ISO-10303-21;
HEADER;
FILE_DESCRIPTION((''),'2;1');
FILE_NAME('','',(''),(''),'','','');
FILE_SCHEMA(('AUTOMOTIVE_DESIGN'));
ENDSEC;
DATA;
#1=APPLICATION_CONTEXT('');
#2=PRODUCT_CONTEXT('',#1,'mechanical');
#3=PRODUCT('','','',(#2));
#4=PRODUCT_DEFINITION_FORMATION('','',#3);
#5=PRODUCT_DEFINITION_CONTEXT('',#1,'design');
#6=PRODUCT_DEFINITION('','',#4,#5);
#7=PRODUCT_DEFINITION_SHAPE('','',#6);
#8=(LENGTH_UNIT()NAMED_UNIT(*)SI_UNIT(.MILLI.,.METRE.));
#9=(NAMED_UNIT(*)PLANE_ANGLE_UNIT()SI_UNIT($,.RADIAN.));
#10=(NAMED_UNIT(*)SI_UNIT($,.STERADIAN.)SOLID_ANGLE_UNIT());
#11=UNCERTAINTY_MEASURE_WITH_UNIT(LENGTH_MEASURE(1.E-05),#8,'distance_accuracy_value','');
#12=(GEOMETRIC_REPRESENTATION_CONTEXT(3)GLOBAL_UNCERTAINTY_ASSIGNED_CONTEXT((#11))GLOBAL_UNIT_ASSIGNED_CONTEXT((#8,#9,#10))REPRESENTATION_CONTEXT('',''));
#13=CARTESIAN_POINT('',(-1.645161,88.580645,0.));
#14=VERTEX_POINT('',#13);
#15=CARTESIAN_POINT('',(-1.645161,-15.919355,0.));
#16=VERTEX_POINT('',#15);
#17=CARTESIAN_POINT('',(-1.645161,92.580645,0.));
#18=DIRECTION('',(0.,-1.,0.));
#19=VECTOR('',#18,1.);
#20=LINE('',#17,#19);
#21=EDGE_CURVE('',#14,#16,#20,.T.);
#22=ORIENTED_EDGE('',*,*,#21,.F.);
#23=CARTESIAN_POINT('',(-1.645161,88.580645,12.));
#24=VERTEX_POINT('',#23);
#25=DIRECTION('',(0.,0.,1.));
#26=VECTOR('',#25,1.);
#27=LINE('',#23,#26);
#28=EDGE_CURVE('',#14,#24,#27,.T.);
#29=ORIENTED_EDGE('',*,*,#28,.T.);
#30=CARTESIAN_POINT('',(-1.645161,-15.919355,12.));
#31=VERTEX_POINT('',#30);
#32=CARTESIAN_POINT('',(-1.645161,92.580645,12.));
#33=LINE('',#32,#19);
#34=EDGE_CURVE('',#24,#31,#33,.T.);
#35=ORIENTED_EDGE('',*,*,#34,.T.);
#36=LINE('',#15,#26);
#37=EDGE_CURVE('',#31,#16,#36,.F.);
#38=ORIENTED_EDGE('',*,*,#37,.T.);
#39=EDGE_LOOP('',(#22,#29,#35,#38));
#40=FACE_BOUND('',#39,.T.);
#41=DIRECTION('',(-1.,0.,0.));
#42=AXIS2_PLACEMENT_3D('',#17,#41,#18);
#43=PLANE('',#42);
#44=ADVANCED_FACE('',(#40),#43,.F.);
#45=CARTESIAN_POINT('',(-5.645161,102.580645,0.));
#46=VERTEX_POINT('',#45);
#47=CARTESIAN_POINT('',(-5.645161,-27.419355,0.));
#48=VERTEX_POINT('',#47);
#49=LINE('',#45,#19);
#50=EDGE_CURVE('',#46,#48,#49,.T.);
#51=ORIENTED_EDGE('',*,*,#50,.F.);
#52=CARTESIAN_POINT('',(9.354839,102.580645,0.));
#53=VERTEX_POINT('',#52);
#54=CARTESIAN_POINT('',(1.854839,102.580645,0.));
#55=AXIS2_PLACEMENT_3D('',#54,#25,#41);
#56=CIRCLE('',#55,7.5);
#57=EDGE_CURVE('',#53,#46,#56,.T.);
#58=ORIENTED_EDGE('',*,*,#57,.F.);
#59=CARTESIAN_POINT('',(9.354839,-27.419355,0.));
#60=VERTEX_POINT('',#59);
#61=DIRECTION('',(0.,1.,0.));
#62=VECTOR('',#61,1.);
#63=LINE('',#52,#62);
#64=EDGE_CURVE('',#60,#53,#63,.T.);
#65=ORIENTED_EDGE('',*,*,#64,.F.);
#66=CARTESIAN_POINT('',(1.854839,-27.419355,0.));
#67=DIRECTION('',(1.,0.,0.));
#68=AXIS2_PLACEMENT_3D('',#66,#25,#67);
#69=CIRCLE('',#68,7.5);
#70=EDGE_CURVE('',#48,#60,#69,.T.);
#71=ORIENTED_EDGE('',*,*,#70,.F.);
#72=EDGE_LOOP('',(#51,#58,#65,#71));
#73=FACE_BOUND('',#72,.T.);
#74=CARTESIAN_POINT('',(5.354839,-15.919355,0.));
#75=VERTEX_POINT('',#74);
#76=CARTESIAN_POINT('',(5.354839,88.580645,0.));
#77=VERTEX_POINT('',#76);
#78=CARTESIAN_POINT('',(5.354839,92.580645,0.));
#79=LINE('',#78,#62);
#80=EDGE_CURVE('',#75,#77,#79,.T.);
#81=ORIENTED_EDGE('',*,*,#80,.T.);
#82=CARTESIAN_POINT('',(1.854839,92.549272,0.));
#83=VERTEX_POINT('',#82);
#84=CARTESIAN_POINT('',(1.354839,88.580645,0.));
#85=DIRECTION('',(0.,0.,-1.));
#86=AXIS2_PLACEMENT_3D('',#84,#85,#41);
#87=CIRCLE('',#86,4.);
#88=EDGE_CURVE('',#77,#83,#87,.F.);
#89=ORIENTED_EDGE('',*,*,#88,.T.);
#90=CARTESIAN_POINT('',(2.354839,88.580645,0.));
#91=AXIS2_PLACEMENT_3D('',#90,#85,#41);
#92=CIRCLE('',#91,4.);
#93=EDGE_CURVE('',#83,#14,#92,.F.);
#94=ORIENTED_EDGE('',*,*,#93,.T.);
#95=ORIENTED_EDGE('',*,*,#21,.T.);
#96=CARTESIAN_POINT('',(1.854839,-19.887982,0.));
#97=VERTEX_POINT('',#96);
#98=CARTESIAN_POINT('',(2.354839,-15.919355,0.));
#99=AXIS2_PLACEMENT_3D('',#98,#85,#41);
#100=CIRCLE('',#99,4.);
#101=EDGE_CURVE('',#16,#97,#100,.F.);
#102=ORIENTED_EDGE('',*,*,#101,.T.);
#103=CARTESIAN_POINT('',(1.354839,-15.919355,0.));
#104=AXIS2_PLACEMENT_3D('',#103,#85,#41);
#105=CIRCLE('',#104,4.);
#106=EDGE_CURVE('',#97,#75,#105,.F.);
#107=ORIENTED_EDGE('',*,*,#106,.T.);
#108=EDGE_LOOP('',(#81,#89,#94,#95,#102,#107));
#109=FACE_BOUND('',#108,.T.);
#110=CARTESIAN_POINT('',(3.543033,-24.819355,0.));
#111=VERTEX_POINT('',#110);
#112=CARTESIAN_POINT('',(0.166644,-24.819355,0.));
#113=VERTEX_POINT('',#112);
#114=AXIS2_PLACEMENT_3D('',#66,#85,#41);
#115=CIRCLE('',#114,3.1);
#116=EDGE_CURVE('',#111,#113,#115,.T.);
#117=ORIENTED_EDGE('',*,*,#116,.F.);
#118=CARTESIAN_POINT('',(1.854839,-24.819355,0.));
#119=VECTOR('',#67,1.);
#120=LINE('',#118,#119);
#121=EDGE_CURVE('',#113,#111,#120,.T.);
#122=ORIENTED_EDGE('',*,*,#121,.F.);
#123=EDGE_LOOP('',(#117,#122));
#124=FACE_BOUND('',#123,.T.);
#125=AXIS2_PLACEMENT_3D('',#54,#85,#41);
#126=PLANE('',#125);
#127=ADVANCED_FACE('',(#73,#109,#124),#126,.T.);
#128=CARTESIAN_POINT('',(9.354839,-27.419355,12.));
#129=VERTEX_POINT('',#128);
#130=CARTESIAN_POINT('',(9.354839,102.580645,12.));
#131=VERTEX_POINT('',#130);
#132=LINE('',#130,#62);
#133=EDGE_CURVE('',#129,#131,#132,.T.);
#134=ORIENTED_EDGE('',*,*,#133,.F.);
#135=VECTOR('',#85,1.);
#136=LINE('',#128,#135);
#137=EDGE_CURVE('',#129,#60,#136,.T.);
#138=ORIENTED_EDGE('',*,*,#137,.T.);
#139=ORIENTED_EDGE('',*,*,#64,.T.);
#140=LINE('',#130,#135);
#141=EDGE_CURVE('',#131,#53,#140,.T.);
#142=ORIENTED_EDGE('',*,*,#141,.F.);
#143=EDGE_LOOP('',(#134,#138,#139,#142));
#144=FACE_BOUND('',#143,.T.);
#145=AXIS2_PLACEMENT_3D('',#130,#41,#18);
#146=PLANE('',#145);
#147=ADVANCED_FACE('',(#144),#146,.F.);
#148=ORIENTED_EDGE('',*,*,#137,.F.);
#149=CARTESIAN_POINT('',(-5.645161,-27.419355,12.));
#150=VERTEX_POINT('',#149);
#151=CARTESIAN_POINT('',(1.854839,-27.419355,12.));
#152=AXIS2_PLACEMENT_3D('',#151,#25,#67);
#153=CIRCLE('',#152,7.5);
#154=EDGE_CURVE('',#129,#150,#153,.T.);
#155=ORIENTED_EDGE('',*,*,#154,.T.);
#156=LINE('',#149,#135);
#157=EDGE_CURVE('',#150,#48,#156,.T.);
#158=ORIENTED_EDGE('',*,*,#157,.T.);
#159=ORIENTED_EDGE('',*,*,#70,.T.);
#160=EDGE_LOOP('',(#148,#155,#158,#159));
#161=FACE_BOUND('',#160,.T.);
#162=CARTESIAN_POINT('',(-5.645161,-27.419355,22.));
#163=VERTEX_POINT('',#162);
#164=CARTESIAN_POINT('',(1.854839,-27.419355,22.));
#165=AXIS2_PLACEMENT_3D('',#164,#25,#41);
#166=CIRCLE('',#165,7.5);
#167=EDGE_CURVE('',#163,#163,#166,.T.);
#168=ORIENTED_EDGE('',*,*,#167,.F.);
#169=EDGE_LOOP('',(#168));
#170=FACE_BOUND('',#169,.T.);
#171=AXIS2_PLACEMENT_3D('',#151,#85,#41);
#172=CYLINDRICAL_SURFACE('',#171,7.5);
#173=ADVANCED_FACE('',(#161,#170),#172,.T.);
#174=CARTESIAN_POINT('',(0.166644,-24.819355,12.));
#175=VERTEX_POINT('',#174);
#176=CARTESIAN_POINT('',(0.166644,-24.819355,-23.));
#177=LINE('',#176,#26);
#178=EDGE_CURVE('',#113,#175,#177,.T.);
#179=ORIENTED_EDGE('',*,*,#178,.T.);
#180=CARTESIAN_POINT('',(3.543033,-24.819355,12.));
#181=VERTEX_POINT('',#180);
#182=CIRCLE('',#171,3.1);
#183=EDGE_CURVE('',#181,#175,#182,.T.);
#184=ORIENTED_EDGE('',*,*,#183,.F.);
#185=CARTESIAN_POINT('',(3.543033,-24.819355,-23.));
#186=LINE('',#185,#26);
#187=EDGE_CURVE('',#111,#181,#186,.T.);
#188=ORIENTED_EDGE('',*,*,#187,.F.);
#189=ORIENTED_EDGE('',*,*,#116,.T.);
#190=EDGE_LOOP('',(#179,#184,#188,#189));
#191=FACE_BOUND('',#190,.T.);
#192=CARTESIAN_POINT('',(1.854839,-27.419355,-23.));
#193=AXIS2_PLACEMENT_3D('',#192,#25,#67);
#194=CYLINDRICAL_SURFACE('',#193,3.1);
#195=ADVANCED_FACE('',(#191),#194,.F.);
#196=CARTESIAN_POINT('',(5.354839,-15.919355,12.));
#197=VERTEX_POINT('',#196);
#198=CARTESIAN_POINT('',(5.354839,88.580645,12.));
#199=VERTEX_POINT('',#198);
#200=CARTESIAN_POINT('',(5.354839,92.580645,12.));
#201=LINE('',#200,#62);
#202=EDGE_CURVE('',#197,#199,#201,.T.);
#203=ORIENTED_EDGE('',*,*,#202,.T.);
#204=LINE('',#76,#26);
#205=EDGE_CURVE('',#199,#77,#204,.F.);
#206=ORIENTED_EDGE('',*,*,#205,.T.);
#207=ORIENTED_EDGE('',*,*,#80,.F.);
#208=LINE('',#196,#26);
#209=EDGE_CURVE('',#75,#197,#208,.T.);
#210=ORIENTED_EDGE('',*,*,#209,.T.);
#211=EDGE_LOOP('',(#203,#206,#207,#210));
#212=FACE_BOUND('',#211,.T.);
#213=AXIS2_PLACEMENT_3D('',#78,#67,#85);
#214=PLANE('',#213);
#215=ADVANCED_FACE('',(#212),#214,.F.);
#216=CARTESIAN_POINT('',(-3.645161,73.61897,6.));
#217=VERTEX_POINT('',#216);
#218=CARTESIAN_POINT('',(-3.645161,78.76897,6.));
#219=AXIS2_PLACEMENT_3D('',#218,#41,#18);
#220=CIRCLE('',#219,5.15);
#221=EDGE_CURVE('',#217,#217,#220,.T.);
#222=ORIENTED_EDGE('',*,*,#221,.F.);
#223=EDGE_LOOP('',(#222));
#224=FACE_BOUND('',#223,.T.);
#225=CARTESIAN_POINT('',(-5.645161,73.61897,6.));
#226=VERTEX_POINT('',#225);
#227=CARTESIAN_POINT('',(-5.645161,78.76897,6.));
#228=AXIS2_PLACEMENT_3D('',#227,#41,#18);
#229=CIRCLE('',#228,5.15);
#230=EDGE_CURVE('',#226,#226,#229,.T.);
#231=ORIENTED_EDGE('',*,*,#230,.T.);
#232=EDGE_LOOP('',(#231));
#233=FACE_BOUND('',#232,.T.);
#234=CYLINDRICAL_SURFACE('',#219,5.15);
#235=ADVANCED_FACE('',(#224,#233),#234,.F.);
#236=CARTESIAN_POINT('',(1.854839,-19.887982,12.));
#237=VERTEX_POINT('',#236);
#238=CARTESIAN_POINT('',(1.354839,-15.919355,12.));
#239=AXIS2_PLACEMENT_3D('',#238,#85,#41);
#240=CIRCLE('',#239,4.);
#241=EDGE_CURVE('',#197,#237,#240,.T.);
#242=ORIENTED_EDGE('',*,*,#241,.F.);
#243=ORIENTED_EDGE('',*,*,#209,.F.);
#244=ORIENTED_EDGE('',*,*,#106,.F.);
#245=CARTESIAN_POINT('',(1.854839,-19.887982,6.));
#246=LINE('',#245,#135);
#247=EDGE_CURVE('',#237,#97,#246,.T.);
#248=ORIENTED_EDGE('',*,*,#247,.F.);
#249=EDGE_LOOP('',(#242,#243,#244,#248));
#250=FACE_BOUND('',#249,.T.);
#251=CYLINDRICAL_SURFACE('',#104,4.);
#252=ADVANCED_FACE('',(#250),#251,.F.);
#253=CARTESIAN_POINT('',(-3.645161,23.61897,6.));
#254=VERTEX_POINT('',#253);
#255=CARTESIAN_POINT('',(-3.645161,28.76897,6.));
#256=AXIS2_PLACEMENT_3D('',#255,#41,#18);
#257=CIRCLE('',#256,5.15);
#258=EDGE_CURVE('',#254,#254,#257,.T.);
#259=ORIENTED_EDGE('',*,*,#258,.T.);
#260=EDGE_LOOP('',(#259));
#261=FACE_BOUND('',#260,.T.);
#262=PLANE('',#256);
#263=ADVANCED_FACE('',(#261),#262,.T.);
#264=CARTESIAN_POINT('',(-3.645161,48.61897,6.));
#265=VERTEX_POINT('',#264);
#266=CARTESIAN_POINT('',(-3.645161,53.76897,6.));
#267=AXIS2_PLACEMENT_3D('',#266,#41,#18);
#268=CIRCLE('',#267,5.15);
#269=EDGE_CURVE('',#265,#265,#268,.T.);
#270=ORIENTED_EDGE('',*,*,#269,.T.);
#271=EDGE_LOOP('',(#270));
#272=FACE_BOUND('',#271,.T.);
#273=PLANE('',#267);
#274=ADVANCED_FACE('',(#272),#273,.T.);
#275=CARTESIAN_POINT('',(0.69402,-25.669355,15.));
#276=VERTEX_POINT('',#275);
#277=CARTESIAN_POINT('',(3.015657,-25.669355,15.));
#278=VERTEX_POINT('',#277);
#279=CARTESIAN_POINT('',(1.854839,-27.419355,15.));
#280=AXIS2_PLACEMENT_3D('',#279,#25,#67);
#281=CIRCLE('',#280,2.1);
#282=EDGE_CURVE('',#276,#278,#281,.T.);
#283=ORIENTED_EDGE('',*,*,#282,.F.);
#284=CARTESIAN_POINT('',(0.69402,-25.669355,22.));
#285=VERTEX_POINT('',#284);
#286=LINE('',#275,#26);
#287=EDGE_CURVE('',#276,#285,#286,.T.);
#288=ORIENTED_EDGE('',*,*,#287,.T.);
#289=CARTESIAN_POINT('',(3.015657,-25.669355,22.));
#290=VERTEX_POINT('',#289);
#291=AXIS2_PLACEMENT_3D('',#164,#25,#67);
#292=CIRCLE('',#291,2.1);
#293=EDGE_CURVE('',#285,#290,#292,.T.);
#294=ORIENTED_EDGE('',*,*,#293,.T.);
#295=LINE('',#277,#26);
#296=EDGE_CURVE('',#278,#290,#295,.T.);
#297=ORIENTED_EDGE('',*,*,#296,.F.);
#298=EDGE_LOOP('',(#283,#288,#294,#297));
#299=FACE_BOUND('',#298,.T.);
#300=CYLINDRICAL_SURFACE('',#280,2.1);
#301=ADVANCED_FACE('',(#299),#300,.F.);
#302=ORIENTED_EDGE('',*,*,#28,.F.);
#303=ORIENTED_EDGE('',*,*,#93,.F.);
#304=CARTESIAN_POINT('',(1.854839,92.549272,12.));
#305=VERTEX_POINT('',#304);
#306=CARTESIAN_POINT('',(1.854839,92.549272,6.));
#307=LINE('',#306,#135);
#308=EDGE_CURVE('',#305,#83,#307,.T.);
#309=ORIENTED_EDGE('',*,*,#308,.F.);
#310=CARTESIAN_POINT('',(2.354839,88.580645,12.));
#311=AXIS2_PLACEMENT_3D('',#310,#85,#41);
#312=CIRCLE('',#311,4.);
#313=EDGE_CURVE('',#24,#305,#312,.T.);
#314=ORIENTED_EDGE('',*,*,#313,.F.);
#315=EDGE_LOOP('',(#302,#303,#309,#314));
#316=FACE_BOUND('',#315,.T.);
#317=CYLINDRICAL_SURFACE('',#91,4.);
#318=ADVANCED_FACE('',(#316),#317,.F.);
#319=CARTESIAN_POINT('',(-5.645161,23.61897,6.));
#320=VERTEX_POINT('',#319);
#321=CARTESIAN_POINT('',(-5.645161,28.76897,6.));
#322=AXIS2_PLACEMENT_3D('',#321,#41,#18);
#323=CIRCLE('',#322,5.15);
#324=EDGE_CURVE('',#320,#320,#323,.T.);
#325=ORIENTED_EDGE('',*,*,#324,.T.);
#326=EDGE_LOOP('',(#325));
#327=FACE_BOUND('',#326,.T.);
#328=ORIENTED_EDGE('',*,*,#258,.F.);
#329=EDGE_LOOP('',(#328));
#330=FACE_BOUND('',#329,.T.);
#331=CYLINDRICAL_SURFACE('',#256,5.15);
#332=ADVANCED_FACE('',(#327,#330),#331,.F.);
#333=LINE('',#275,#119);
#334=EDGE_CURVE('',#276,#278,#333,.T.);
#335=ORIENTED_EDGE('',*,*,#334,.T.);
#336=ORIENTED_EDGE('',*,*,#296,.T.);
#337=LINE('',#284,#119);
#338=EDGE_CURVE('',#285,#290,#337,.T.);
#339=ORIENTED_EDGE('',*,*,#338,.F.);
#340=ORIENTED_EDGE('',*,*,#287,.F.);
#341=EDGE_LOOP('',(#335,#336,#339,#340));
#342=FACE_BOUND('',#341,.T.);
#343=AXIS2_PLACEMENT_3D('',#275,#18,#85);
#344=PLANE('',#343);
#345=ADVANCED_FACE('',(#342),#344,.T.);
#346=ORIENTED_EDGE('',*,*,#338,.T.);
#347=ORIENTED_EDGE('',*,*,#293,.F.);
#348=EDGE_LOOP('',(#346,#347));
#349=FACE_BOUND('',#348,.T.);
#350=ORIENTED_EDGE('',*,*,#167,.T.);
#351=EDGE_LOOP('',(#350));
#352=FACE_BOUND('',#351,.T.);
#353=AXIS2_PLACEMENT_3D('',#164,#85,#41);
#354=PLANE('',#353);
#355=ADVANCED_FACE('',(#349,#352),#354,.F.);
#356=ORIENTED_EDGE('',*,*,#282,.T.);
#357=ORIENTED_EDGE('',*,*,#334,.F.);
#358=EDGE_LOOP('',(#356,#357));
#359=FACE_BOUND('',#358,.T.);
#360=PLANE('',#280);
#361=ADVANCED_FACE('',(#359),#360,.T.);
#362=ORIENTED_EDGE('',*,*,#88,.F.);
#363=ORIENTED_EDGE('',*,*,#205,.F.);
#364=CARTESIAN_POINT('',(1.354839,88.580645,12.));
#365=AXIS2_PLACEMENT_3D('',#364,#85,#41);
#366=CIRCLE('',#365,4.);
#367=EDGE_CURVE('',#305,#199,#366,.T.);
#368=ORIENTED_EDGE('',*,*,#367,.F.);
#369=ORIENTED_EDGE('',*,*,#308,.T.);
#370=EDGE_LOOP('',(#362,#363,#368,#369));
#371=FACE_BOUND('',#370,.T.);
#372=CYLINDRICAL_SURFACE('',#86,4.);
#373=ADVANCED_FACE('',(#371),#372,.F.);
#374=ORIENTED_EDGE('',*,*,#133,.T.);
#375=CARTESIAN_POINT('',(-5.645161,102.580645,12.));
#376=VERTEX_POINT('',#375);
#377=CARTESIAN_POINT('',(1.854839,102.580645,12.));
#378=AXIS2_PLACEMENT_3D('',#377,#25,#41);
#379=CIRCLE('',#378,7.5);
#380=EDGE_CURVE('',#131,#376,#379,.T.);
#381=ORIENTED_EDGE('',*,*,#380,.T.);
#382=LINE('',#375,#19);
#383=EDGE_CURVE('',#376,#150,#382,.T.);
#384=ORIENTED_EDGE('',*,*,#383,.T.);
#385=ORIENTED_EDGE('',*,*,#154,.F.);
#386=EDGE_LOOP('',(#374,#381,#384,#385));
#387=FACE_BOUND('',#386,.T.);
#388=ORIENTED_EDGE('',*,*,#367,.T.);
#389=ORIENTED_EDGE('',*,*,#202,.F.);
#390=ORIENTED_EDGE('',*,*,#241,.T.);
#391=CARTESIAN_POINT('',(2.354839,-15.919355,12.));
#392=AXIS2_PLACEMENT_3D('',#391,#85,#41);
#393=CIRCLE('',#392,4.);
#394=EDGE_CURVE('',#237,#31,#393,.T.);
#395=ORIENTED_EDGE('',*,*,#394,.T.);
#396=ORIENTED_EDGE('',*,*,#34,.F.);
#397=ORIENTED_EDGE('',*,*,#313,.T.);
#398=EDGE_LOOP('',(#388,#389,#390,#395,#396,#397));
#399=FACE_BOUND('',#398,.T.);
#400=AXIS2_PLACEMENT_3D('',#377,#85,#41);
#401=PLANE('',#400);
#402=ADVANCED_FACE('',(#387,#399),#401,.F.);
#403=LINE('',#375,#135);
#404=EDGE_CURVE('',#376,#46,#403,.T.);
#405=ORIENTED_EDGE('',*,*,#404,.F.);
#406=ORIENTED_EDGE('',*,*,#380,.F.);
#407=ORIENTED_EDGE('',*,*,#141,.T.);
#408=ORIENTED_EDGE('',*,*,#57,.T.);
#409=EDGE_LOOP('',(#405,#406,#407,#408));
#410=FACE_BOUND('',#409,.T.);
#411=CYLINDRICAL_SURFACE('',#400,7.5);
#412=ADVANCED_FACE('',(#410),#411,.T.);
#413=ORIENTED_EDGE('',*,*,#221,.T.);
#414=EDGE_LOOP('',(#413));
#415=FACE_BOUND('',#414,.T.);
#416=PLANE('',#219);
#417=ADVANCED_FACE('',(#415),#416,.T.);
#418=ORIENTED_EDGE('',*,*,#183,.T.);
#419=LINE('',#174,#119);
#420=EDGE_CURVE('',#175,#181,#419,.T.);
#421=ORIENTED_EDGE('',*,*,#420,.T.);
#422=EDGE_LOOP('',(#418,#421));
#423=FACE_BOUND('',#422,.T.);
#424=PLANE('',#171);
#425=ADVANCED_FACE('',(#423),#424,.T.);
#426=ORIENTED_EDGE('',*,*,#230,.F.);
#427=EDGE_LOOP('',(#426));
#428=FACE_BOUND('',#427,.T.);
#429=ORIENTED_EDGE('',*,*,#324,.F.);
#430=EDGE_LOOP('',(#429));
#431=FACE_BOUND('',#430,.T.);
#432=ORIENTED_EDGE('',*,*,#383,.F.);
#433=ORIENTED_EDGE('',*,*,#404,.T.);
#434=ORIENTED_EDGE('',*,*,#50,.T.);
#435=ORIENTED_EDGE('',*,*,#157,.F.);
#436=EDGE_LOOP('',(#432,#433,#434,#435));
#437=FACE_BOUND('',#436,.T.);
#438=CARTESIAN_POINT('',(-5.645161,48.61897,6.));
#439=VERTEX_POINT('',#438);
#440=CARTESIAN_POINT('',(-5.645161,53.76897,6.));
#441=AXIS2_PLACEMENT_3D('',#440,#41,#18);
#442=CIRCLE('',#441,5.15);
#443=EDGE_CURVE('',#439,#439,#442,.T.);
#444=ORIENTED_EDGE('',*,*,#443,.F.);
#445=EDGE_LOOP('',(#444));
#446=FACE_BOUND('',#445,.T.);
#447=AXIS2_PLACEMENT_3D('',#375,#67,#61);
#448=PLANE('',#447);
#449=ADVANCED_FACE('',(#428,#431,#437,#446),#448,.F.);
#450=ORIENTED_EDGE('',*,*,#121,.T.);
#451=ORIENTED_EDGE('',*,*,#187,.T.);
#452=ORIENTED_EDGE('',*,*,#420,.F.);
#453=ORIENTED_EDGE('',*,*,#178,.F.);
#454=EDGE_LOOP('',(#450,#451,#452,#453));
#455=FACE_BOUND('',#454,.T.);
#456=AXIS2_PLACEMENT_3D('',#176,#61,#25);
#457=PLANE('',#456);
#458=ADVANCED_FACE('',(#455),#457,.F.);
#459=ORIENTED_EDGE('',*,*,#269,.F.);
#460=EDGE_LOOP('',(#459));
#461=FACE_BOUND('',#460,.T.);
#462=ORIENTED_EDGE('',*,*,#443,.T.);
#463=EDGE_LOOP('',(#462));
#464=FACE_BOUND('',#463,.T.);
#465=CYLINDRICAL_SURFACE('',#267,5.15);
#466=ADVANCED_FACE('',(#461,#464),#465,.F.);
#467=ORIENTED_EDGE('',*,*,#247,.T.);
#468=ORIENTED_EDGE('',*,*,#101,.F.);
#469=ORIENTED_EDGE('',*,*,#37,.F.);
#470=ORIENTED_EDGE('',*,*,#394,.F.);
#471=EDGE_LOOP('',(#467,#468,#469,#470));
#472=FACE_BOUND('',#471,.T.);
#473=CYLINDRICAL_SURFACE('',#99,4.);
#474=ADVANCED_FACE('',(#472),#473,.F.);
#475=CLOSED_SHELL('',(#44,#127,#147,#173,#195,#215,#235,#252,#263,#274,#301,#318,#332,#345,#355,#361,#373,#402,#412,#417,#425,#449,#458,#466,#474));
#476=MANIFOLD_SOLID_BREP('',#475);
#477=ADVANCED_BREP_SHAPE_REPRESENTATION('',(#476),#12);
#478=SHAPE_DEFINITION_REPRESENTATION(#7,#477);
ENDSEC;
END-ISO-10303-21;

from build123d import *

# Parameters (mm, degrees)
BOSS_EXTRUDE1_DEPTH = 12
SKETCH2_R           = 3.1
BOSS_EXTRUDE2_DEPTH = 15
CUT_EXTRUDE1_START  = -50
CUT_EXTRUDE1_DEPTH  = 50
CUT_EXTRUDE2_START  = -15
CUT_EXTRUDE2_DEPTH  = 15
SKETCH5_W           = 7
SKETCH5_H           = 112.5
CUT_EXTRUDE3_DEPTH  = 12
SKETCH6_R           = 5.15
CUT_EXTRUDE4_DEPTH  = 2
FILLET1_R           = 4
BOSS_EXTRUDE3_DEPTH = 10
SKETCH9_R           = 2.1
CUT_EXTRUDE5_DEPTH  = 7
BOSS_EXTRUDE4_DEPTH = 7


with BuildPart() as part:
    # Sketch1 → Boss-Extrude1 (new body)
    with BuildSketch(Plane.XY):
        with BuildLine():
            Line((-5.64516129, 102.580645161), (-5.64516129, -27.419354839))
            ThreePointArc((-5.64516129, -27.419354839), (1.85483871, -34.919354839), (9.35483871, -27.419354839))
            Line((9.35483871, -27.419354839), (9.35483871, 102.580645161))
            ThreePointArc((9.35483871, 102.580645161), (1.85483871, 110.080645161), (-5.64516129, 102.580645161))
        make_face()
    extrude(amount=BOSS_EXTRUDE1_DEPTH)

    # Sketch2 → Boss-Extrude2 (add)
    with BuildSketch(Plane.XY.offset(12)):
        with Locations(Location((1.85483871, -27.419354839, 0), (0, 0, 180))):
            Circle(SKETCH2_R)
    extrude(amount=BOSS_EXTRUDE2_DEPTH)

    # Sketch3 → Cut-Extrude1 (cut)
    with BuildSketch(Plane.XY.offset(27).offset(CUT_EXTRUDE1_START)):
        with BuildLine():
            Line((0.166644408, -24.819354839), (3.543033011, -24.819354839))
            ThreePointArc((3.543033011, -24.819354839), (1.85483871, -30.519354839), (0.166644408, -24.819354839))
        make_face()
    extrude(amount=CUT_EXTRUDE1_DEPTH, mode=Mode.SUBTRACT)

    # Sketch4 → Cut-Extrude2 (cut)
    with BuildSketch(Plane.XY.offset(27).offset(CUT_EXTRUDE2_START)):
        with BuildLine():
            Line((0.166644408, -24.819354839), (3.543033011, -24.819354839))
            ThreePointArc((3.543033011, -24.819354839), (1.85483871, -24.319354839), (0.166644408, -24.819354839))
        make_face()
    extrude(amount=CUT_EXTRUDE2_DEPTH, mode=Mode.SUBTRACT)

    # Sketch5 → Cut-Extrude3 (cut)
    with BuildSketch(Plane.XY.offset(12)):
        with Locations((1.85483871, 36.330645161)):
            Rectangle(SKETCH5_W, SKETCH5_H)
    extrude(amount=-CUT_EXTRUDE3_DEPTH, mode=Mode.SUBTRACT)

    # Sketch6 → Cut-Extrude4 (cut)
    with BuildSketch(Plane.ZY.offset(5.64516129)):
        with Locations(Location((6, 78.768969581, 0), (0, 0, 270))):
            Circle(SKETCH6_R)
        with Locations(Location((6, 53.768969581, 0), (0, 0, 270))):
            Circle(SKETCH6_R)
        with Locations(Location((6, 28.768969581, 0), (0, 0, 270))):
            Circle(SKETCH6_R)
    extrude(amount=-CUT_EXTRUDE4_DEPTH, mode=Mode.SUBTRACT)

    # Fillet1
    # the kernel refuses this fillet: 4 mm, written as the material it adds along each edge
    with BuildSketch(Plane(origin=(-1.64516129, -19.919354839, 12), x_dir=(0, 1, 0), z_dir=(0, 0, -1)), Plane(origin=(5.35483871, -19.919354839, 12), x_dir=(-1, 0, 0), z_dir=(0, 0, -1)), Plane(origin=(5.35483871, 92.580645161, 12), x_dir=(0, -1, 0), z_dir=(0, 0, -1))) as fillet1_piece_1:
        with BuildLine():
            CenterArc((FILLET1_R, FILLET1_R), FILLET1_R, 180, 90)
            Line((0, FILLET1_R), (0, 0))
            Line((0, 0), (FILLET1_R, 0))
        make_face()
    extrude(amount=12)
    with BuildSketch(Plane(origin=(-1.64516129, 92.580645161, 12), x_dir=(0, -1, 0), z_dir=(0, 0, -1))) as fillet1_piece_2:
        with BuildLine():
            CenterArc((FILLET1_R, -FILLET1_R), FILLET1_R, 90, 90)
            Line((0, -FILLET1_R), (0, 0))
            Line((0, 0), (FILLET1_R, 0))
        make_face()
    extrude(amount=12)

    # Sketch7 → Boss-Extrude3 (add)
    with BuildSketch(Plane.XY.offset(12)):
        with BuildLine():
            ThreePointArc((-5.64516129, -27.419354839), (1.85483871, -34.919354839), (9.35483871, -27.419354839))
            ThreePointArc((9.35483871, -27.419354839), (1.85483871, -19.919354839), (-5.64516129, -27.419354839))
        make_face()
    extrude(amount=BOSS_EXTRUDE3_DEPTH)

    # Sketch9 → Cut-Extrude5 (cut)
    with BuildSketch(Plane.XY.offset(22)):
        with Locations((1.85483871, -27.419354839)):
            Circle(SKETCH9_R)
    extrude(amount=-CUT_EXTRUDE5_DEPTH, mode=Mode.SUBTRACT)

    # Sketch10 → Boss-Extrude4 (add)
    with BuildSketch(Plane.XY.offset(22)):
        with BuildLine():
            Line((0.694020033, -25.669354839), (3.015657386, -25.669354839))
            ThreePointArc((3.015657386, -25.669354839), (1.85483871, -25.319354839), (0.694020033, -25.669354839))
        make_face()
    extrude(amount=-BOSS_EXTRUDE4_DEPTH)


solid = part.part
